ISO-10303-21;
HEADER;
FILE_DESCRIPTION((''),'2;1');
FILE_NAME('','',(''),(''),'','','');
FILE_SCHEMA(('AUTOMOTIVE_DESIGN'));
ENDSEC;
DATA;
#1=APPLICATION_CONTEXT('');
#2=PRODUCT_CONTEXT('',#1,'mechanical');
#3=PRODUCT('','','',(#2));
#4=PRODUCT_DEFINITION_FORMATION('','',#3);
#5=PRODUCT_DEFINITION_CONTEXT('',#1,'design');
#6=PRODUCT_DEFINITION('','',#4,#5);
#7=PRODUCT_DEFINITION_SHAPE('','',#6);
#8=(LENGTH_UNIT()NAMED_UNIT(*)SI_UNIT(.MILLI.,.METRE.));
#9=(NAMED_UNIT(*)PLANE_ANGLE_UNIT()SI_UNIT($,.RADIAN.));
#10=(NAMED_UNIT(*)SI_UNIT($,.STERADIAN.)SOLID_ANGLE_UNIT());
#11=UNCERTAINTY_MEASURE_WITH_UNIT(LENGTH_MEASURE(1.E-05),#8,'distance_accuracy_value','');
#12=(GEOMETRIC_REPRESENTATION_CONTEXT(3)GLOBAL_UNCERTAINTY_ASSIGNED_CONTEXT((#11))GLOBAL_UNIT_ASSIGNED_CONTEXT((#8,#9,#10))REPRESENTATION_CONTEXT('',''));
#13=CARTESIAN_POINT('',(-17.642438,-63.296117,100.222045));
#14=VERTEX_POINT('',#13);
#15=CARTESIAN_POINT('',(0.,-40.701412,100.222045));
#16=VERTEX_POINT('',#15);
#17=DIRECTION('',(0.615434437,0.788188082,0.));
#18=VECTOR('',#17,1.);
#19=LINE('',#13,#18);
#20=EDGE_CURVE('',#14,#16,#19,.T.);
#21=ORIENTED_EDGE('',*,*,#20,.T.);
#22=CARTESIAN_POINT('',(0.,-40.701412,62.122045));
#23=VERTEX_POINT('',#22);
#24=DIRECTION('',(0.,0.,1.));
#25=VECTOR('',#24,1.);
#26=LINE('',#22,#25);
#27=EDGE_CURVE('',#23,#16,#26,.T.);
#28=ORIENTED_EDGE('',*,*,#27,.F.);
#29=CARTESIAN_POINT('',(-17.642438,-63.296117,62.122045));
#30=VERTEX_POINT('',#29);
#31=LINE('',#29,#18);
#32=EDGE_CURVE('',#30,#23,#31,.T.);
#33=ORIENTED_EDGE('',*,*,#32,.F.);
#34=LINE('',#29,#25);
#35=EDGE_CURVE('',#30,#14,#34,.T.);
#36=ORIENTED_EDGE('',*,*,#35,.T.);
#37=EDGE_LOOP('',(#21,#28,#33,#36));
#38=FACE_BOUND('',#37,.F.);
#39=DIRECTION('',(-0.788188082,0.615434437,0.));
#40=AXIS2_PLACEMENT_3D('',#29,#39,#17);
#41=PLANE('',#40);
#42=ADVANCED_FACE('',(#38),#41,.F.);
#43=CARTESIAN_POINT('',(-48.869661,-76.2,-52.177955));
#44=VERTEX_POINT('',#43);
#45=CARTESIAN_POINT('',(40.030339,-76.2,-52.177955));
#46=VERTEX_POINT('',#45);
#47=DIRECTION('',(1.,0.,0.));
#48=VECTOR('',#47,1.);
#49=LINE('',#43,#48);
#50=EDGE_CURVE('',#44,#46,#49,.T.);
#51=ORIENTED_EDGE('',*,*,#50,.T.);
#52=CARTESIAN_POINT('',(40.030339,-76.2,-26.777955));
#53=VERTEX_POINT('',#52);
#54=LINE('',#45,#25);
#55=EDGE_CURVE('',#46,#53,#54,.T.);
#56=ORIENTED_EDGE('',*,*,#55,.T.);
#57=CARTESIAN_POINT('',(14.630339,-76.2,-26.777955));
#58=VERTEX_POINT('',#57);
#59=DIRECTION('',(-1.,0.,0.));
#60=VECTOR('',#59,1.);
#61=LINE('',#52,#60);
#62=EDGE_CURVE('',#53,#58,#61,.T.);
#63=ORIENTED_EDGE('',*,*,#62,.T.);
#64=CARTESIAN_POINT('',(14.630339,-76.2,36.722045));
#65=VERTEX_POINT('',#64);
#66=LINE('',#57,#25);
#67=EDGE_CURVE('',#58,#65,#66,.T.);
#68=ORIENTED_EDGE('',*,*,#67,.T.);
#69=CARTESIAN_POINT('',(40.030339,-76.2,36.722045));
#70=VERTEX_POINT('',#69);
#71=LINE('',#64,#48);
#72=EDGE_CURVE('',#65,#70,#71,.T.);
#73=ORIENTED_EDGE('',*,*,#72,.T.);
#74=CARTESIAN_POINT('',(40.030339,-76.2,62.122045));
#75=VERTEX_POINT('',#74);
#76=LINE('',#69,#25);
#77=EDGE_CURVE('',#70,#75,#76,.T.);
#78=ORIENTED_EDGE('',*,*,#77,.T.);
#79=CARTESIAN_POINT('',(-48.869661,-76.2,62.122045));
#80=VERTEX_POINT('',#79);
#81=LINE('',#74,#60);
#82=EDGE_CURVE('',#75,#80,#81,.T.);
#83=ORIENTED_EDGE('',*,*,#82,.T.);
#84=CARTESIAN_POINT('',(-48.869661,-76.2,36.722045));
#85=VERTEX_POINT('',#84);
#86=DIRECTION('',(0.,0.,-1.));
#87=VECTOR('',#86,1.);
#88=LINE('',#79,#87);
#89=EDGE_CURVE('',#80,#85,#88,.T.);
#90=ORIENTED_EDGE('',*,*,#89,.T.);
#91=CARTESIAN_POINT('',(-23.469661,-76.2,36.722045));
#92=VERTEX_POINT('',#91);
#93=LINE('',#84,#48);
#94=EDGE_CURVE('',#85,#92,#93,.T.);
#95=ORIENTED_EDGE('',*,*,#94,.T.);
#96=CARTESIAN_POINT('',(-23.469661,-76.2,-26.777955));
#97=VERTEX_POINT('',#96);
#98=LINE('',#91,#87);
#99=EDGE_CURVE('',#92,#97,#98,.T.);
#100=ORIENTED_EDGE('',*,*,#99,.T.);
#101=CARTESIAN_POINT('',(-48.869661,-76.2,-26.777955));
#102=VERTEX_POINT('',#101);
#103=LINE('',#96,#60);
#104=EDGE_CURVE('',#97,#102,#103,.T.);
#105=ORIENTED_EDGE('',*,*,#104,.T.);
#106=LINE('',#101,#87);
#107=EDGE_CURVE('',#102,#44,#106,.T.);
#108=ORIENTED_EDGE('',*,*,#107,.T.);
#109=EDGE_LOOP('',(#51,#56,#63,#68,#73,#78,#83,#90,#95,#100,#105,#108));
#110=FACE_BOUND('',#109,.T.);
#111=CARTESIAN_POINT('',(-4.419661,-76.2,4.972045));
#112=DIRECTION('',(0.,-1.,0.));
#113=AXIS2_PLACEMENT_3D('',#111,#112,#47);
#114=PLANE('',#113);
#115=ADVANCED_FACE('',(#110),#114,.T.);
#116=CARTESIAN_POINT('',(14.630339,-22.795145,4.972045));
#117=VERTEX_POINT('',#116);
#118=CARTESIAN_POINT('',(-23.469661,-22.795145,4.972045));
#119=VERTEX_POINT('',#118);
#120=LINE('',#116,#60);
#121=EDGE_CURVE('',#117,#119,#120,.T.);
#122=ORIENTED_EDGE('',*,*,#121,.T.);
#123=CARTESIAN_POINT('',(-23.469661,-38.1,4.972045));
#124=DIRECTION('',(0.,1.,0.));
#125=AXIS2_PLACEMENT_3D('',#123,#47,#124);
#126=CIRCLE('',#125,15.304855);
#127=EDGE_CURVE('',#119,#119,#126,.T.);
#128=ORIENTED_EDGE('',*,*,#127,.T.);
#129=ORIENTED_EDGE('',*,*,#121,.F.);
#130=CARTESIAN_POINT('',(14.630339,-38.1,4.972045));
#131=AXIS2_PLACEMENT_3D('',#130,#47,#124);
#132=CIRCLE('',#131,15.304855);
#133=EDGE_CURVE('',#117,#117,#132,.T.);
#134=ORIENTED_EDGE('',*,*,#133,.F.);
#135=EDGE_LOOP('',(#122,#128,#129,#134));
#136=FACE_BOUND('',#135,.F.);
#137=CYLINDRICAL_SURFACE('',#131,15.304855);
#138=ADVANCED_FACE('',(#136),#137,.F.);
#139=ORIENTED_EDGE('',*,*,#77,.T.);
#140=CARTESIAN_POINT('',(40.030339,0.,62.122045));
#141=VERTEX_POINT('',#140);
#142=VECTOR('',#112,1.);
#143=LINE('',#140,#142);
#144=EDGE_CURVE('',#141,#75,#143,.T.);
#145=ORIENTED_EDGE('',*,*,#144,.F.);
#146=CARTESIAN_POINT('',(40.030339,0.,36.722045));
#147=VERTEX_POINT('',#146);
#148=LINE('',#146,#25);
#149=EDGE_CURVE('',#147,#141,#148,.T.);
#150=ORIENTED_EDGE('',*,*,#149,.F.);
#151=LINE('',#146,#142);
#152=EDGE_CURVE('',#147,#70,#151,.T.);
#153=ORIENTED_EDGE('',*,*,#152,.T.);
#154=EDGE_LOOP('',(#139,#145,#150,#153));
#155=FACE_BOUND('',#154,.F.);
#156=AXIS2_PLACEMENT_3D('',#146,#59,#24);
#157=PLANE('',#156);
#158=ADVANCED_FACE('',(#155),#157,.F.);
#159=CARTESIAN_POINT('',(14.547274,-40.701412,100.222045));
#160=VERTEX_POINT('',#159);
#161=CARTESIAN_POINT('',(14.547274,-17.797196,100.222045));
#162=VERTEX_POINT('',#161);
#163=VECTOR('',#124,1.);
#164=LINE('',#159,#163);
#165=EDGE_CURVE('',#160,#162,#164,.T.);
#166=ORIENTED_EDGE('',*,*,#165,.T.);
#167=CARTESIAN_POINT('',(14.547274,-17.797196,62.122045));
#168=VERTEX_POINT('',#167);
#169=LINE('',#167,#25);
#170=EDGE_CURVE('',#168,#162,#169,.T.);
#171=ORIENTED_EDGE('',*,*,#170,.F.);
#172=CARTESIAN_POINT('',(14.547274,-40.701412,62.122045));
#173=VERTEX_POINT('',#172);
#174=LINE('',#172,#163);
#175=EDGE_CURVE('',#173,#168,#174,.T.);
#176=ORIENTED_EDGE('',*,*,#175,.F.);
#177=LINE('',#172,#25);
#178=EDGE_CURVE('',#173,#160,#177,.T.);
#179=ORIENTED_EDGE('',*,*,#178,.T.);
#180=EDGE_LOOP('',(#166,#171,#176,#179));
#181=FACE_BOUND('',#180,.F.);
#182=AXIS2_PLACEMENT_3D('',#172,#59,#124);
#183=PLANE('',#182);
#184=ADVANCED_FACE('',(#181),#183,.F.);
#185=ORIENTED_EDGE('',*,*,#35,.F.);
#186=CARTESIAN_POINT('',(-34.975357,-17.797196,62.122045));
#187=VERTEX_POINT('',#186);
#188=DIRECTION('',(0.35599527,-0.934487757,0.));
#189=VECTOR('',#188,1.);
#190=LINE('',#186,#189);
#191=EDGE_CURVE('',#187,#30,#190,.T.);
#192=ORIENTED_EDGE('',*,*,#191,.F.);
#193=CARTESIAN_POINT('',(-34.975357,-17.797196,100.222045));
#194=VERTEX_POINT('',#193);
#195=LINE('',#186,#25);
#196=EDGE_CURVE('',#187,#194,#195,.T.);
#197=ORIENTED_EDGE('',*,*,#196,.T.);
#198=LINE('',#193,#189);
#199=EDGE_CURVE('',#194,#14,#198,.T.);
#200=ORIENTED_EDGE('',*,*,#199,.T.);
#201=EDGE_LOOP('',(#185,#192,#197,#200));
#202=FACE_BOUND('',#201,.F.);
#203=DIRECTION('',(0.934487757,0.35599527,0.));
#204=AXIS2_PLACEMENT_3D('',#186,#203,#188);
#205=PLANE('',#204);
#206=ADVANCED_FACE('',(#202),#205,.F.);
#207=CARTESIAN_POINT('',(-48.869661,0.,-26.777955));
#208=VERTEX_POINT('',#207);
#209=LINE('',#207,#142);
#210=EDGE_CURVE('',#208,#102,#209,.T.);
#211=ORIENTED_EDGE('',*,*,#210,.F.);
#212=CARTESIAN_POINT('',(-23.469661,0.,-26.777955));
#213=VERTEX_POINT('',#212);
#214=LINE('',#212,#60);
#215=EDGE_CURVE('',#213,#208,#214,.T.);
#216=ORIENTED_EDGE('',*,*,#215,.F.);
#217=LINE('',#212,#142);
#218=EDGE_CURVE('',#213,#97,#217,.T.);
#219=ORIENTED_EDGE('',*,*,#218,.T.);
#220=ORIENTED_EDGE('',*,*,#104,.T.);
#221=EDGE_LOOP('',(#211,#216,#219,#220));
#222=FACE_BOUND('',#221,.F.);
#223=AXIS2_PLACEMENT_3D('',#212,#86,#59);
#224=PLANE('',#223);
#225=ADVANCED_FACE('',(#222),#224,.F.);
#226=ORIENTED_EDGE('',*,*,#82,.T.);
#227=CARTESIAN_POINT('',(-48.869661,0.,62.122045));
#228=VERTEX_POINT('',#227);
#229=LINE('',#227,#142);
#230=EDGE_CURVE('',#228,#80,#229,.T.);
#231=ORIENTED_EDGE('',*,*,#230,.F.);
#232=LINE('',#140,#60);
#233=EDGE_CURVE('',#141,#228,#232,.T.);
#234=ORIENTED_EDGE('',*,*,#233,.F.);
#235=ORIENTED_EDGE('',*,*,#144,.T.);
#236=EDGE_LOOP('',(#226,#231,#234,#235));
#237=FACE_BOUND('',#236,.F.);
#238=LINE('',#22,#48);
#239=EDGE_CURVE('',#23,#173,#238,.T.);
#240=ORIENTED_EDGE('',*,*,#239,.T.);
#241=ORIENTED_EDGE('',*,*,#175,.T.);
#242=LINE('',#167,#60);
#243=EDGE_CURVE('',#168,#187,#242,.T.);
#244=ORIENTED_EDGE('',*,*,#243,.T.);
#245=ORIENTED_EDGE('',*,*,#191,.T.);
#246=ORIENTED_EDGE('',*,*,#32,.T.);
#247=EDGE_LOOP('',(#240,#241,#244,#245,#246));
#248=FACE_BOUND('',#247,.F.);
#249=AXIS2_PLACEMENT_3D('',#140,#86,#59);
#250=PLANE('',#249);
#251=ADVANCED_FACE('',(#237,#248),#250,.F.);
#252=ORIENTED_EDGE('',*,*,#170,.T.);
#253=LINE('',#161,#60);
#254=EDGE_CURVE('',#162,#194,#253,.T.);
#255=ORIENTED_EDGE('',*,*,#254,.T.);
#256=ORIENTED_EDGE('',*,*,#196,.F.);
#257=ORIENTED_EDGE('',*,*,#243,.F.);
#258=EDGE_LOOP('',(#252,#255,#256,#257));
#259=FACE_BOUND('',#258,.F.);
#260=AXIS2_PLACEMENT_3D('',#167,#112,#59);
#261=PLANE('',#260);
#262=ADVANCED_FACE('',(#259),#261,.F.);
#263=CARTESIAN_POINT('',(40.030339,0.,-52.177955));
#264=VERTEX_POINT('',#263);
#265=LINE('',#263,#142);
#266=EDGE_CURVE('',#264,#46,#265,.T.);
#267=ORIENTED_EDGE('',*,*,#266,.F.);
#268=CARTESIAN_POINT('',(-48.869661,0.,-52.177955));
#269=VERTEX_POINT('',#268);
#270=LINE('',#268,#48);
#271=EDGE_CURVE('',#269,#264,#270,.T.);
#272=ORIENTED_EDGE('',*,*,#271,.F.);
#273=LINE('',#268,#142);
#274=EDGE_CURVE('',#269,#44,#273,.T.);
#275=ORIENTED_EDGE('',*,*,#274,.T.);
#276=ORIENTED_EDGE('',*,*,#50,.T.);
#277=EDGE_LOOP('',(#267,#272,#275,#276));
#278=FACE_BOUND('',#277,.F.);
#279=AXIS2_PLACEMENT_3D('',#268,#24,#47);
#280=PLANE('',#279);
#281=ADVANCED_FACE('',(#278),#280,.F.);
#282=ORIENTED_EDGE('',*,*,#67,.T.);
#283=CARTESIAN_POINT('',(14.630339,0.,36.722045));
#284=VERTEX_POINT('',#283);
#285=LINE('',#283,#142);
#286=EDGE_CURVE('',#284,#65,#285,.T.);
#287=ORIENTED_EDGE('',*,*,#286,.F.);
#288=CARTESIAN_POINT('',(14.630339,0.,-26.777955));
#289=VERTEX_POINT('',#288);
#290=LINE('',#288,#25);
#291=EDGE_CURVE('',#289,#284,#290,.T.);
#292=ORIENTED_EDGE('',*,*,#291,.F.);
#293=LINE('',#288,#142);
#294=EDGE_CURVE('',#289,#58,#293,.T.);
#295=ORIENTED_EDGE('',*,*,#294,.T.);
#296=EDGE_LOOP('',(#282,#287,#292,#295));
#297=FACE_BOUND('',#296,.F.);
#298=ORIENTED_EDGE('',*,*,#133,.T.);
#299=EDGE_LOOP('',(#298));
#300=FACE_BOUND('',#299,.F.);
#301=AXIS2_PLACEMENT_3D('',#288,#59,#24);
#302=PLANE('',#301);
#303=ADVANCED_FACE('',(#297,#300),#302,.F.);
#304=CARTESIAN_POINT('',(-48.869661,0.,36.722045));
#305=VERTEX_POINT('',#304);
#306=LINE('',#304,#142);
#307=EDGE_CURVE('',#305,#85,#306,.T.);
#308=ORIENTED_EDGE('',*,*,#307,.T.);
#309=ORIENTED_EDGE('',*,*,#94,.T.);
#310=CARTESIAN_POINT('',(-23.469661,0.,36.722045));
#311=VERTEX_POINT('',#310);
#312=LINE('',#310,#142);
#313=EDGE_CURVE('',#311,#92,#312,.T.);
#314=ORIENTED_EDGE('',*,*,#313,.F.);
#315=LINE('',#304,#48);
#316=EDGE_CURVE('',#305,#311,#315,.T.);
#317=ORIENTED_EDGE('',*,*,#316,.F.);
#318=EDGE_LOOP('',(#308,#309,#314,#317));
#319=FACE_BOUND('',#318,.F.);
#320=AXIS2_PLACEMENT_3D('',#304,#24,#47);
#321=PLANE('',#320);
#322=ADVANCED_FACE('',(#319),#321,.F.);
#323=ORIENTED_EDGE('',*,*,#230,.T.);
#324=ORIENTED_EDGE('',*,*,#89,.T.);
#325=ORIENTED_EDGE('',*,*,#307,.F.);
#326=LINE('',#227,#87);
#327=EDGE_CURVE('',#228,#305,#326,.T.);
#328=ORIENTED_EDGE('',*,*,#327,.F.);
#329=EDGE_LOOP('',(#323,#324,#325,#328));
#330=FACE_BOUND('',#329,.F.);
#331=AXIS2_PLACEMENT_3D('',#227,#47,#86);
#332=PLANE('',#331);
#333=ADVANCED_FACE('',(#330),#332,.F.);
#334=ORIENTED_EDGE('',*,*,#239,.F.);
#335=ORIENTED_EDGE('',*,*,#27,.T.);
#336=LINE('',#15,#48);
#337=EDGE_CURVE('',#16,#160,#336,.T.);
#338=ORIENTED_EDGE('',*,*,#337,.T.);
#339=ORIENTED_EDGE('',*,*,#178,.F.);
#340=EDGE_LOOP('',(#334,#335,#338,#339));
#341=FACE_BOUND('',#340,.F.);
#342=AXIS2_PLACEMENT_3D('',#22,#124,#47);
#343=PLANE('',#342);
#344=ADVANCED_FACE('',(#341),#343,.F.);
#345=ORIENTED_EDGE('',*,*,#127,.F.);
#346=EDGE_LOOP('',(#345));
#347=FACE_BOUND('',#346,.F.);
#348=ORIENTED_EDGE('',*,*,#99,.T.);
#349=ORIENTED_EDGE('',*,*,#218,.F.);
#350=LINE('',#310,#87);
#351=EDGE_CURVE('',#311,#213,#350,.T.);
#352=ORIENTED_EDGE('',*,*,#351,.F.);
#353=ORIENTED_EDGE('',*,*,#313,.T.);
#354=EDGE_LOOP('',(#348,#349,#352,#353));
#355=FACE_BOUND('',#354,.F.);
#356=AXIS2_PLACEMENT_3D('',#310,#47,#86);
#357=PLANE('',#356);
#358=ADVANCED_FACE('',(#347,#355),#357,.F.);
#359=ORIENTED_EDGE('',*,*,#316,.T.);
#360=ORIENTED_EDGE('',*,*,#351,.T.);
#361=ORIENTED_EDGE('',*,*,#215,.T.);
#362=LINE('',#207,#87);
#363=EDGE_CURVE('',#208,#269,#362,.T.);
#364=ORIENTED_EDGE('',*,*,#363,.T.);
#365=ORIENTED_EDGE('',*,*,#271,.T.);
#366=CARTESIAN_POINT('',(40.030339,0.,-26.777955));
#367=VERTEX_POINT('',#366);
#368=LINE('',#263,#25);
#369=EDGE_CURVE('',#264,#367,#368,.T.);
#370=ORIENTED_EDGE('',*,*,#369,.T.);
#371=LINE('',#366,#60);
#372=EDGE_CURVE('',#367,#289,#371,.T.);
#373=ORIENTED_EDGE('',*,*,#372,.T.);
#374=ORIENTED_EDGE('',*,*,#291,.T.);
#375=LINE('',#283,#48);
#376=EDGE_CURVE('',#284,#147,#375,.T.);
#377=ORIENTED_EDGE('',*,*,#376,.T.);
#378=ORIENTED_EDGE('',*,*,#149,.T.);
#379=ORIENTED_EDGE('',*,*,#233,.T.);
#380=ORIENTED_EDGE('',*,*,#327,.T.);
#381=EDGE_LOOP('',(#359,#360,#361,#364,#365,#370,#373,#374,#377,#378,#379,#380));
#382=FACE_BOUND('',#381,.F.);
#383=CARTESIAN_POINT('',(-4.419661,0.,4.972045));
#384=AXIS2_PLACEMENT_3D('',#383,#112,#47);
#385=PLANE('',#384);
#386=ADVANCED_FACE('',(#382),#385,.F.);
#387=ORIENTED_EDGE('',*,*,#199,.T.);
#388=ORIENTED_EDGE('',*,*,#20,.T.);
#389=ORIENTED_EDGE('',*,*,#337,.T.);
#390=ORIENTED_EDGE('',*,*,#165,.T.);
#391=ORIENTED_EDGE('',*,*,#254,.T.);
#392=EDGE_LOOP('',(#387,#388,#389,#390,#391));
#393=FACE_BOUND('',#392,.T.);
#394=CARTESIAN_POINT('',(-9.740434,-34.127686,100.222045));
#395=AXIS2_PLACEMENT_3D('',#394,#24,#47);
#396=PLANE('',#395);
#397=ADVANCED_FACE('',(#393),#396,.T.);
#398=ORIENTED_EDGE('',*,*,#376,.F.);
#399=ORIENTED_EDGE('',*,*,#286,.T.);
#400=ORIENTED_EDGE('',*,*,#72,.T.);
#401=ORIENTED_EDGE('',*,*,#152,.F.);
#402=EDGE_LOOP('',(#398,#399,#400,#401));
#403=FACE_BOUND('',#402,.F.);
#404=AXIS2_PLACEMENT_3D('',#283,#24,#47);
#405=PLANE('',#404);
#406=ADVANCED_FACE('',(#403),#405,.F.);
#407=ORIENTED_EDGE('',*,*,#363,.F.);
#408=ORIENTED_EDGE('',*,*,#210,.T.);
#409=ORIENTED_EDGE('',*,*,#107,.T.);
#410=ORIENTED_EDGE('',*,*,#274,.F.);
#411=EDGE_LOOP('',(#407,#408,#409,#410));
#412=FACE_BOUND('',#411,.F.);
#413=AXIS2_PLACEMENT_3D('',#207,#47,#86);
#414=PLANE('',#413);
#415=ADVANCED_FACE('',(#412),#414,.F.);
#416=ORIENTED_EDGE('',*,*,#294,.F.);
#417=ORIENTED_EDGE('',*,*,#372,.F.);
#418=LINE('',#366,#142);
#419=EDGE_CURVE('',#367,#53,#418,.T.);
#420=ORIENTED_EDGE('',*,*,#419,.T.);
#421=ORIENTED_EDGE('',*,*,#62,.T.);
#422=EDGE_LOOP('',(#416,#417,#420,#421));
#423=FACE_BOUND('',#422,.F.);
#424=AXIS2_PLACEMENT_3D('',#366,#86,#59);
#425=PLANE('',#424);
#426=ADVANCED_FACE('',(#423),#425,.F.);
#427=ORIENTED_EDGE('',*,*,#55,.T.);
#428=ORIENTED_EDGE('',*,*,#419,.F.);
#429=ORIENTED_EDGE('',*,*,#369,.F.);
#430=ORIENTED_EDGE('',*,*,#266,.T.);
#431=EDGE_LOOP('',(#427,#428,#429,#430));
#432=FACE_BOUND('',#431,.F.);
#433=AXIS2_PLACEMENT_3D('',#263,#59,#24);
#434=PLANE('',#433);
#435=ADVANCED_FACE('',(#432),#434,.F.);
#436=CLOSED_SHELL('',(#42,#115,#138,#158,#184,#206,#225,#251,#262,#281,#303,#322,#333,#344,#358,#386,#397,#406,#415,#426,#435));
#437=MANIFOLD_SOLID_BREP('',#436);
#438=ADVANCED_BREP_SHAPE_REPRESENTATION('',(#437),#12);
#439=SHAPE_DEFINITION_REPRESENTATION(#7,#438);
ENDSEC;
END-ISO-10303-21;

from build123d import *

# Parameters (mm, degrees)
F1_DEPTH = 76.2
F2_R     = 15.3048554067
F3_DEPTH = 63.501
F5_DEPTH = 38.1


# Not quite as in the source:
# - a feature names something its author has since deleted; it is built from what else it names


with BuildPart() as f1:
    # F0 (on Front) → F1 (new body)
    with BuildSketch(Plane.XZ):
        Polygon((-48.8696609855, -52.1779545115), (40.0303390145, -52.1779545115), (40.0303390145, -26.7779545115), (14.6303390145, -26.7779545115), (14.6303390145, 36.7220454885), (40.0303390145, 36.7220454885), (40.0303390145, 62.1220454885), (-48.8696609855, 62.1220454885), (-48.8696609855, 36.7220454885), (-23.4696609855, 36.7220454885), (-23.4696609855, -26.7779545115), (-48.8696609855, -26.7779545115), align=None)
    extrude(amount=F1_DEPTH)

    # F2 (on face) → F3 (cut, through all)
    with BuildSketch(Plane.YZ.offset(14.6303390145)):
        with Locations((-38.1, 4.9720454885)):
            Circle(F2_R)
    extrude(amount=-F3_DEPTH, mode=Mode.SUBTRACT)

    # F4 (on face) → F5 (join)
    with BuildSketch(Plane.XY.offset(62.1220454885)):
        Polygon((-17.6424384117, -63.2961168885), (0, -40.7014116645), (14.5472735167, -40.7014116645), (14.5472735167, -17.7971962839), (-34.9753573537, -17.7971962839), align=None)
    extrude(amount=F5_DEPTH)


solid = f1.part
